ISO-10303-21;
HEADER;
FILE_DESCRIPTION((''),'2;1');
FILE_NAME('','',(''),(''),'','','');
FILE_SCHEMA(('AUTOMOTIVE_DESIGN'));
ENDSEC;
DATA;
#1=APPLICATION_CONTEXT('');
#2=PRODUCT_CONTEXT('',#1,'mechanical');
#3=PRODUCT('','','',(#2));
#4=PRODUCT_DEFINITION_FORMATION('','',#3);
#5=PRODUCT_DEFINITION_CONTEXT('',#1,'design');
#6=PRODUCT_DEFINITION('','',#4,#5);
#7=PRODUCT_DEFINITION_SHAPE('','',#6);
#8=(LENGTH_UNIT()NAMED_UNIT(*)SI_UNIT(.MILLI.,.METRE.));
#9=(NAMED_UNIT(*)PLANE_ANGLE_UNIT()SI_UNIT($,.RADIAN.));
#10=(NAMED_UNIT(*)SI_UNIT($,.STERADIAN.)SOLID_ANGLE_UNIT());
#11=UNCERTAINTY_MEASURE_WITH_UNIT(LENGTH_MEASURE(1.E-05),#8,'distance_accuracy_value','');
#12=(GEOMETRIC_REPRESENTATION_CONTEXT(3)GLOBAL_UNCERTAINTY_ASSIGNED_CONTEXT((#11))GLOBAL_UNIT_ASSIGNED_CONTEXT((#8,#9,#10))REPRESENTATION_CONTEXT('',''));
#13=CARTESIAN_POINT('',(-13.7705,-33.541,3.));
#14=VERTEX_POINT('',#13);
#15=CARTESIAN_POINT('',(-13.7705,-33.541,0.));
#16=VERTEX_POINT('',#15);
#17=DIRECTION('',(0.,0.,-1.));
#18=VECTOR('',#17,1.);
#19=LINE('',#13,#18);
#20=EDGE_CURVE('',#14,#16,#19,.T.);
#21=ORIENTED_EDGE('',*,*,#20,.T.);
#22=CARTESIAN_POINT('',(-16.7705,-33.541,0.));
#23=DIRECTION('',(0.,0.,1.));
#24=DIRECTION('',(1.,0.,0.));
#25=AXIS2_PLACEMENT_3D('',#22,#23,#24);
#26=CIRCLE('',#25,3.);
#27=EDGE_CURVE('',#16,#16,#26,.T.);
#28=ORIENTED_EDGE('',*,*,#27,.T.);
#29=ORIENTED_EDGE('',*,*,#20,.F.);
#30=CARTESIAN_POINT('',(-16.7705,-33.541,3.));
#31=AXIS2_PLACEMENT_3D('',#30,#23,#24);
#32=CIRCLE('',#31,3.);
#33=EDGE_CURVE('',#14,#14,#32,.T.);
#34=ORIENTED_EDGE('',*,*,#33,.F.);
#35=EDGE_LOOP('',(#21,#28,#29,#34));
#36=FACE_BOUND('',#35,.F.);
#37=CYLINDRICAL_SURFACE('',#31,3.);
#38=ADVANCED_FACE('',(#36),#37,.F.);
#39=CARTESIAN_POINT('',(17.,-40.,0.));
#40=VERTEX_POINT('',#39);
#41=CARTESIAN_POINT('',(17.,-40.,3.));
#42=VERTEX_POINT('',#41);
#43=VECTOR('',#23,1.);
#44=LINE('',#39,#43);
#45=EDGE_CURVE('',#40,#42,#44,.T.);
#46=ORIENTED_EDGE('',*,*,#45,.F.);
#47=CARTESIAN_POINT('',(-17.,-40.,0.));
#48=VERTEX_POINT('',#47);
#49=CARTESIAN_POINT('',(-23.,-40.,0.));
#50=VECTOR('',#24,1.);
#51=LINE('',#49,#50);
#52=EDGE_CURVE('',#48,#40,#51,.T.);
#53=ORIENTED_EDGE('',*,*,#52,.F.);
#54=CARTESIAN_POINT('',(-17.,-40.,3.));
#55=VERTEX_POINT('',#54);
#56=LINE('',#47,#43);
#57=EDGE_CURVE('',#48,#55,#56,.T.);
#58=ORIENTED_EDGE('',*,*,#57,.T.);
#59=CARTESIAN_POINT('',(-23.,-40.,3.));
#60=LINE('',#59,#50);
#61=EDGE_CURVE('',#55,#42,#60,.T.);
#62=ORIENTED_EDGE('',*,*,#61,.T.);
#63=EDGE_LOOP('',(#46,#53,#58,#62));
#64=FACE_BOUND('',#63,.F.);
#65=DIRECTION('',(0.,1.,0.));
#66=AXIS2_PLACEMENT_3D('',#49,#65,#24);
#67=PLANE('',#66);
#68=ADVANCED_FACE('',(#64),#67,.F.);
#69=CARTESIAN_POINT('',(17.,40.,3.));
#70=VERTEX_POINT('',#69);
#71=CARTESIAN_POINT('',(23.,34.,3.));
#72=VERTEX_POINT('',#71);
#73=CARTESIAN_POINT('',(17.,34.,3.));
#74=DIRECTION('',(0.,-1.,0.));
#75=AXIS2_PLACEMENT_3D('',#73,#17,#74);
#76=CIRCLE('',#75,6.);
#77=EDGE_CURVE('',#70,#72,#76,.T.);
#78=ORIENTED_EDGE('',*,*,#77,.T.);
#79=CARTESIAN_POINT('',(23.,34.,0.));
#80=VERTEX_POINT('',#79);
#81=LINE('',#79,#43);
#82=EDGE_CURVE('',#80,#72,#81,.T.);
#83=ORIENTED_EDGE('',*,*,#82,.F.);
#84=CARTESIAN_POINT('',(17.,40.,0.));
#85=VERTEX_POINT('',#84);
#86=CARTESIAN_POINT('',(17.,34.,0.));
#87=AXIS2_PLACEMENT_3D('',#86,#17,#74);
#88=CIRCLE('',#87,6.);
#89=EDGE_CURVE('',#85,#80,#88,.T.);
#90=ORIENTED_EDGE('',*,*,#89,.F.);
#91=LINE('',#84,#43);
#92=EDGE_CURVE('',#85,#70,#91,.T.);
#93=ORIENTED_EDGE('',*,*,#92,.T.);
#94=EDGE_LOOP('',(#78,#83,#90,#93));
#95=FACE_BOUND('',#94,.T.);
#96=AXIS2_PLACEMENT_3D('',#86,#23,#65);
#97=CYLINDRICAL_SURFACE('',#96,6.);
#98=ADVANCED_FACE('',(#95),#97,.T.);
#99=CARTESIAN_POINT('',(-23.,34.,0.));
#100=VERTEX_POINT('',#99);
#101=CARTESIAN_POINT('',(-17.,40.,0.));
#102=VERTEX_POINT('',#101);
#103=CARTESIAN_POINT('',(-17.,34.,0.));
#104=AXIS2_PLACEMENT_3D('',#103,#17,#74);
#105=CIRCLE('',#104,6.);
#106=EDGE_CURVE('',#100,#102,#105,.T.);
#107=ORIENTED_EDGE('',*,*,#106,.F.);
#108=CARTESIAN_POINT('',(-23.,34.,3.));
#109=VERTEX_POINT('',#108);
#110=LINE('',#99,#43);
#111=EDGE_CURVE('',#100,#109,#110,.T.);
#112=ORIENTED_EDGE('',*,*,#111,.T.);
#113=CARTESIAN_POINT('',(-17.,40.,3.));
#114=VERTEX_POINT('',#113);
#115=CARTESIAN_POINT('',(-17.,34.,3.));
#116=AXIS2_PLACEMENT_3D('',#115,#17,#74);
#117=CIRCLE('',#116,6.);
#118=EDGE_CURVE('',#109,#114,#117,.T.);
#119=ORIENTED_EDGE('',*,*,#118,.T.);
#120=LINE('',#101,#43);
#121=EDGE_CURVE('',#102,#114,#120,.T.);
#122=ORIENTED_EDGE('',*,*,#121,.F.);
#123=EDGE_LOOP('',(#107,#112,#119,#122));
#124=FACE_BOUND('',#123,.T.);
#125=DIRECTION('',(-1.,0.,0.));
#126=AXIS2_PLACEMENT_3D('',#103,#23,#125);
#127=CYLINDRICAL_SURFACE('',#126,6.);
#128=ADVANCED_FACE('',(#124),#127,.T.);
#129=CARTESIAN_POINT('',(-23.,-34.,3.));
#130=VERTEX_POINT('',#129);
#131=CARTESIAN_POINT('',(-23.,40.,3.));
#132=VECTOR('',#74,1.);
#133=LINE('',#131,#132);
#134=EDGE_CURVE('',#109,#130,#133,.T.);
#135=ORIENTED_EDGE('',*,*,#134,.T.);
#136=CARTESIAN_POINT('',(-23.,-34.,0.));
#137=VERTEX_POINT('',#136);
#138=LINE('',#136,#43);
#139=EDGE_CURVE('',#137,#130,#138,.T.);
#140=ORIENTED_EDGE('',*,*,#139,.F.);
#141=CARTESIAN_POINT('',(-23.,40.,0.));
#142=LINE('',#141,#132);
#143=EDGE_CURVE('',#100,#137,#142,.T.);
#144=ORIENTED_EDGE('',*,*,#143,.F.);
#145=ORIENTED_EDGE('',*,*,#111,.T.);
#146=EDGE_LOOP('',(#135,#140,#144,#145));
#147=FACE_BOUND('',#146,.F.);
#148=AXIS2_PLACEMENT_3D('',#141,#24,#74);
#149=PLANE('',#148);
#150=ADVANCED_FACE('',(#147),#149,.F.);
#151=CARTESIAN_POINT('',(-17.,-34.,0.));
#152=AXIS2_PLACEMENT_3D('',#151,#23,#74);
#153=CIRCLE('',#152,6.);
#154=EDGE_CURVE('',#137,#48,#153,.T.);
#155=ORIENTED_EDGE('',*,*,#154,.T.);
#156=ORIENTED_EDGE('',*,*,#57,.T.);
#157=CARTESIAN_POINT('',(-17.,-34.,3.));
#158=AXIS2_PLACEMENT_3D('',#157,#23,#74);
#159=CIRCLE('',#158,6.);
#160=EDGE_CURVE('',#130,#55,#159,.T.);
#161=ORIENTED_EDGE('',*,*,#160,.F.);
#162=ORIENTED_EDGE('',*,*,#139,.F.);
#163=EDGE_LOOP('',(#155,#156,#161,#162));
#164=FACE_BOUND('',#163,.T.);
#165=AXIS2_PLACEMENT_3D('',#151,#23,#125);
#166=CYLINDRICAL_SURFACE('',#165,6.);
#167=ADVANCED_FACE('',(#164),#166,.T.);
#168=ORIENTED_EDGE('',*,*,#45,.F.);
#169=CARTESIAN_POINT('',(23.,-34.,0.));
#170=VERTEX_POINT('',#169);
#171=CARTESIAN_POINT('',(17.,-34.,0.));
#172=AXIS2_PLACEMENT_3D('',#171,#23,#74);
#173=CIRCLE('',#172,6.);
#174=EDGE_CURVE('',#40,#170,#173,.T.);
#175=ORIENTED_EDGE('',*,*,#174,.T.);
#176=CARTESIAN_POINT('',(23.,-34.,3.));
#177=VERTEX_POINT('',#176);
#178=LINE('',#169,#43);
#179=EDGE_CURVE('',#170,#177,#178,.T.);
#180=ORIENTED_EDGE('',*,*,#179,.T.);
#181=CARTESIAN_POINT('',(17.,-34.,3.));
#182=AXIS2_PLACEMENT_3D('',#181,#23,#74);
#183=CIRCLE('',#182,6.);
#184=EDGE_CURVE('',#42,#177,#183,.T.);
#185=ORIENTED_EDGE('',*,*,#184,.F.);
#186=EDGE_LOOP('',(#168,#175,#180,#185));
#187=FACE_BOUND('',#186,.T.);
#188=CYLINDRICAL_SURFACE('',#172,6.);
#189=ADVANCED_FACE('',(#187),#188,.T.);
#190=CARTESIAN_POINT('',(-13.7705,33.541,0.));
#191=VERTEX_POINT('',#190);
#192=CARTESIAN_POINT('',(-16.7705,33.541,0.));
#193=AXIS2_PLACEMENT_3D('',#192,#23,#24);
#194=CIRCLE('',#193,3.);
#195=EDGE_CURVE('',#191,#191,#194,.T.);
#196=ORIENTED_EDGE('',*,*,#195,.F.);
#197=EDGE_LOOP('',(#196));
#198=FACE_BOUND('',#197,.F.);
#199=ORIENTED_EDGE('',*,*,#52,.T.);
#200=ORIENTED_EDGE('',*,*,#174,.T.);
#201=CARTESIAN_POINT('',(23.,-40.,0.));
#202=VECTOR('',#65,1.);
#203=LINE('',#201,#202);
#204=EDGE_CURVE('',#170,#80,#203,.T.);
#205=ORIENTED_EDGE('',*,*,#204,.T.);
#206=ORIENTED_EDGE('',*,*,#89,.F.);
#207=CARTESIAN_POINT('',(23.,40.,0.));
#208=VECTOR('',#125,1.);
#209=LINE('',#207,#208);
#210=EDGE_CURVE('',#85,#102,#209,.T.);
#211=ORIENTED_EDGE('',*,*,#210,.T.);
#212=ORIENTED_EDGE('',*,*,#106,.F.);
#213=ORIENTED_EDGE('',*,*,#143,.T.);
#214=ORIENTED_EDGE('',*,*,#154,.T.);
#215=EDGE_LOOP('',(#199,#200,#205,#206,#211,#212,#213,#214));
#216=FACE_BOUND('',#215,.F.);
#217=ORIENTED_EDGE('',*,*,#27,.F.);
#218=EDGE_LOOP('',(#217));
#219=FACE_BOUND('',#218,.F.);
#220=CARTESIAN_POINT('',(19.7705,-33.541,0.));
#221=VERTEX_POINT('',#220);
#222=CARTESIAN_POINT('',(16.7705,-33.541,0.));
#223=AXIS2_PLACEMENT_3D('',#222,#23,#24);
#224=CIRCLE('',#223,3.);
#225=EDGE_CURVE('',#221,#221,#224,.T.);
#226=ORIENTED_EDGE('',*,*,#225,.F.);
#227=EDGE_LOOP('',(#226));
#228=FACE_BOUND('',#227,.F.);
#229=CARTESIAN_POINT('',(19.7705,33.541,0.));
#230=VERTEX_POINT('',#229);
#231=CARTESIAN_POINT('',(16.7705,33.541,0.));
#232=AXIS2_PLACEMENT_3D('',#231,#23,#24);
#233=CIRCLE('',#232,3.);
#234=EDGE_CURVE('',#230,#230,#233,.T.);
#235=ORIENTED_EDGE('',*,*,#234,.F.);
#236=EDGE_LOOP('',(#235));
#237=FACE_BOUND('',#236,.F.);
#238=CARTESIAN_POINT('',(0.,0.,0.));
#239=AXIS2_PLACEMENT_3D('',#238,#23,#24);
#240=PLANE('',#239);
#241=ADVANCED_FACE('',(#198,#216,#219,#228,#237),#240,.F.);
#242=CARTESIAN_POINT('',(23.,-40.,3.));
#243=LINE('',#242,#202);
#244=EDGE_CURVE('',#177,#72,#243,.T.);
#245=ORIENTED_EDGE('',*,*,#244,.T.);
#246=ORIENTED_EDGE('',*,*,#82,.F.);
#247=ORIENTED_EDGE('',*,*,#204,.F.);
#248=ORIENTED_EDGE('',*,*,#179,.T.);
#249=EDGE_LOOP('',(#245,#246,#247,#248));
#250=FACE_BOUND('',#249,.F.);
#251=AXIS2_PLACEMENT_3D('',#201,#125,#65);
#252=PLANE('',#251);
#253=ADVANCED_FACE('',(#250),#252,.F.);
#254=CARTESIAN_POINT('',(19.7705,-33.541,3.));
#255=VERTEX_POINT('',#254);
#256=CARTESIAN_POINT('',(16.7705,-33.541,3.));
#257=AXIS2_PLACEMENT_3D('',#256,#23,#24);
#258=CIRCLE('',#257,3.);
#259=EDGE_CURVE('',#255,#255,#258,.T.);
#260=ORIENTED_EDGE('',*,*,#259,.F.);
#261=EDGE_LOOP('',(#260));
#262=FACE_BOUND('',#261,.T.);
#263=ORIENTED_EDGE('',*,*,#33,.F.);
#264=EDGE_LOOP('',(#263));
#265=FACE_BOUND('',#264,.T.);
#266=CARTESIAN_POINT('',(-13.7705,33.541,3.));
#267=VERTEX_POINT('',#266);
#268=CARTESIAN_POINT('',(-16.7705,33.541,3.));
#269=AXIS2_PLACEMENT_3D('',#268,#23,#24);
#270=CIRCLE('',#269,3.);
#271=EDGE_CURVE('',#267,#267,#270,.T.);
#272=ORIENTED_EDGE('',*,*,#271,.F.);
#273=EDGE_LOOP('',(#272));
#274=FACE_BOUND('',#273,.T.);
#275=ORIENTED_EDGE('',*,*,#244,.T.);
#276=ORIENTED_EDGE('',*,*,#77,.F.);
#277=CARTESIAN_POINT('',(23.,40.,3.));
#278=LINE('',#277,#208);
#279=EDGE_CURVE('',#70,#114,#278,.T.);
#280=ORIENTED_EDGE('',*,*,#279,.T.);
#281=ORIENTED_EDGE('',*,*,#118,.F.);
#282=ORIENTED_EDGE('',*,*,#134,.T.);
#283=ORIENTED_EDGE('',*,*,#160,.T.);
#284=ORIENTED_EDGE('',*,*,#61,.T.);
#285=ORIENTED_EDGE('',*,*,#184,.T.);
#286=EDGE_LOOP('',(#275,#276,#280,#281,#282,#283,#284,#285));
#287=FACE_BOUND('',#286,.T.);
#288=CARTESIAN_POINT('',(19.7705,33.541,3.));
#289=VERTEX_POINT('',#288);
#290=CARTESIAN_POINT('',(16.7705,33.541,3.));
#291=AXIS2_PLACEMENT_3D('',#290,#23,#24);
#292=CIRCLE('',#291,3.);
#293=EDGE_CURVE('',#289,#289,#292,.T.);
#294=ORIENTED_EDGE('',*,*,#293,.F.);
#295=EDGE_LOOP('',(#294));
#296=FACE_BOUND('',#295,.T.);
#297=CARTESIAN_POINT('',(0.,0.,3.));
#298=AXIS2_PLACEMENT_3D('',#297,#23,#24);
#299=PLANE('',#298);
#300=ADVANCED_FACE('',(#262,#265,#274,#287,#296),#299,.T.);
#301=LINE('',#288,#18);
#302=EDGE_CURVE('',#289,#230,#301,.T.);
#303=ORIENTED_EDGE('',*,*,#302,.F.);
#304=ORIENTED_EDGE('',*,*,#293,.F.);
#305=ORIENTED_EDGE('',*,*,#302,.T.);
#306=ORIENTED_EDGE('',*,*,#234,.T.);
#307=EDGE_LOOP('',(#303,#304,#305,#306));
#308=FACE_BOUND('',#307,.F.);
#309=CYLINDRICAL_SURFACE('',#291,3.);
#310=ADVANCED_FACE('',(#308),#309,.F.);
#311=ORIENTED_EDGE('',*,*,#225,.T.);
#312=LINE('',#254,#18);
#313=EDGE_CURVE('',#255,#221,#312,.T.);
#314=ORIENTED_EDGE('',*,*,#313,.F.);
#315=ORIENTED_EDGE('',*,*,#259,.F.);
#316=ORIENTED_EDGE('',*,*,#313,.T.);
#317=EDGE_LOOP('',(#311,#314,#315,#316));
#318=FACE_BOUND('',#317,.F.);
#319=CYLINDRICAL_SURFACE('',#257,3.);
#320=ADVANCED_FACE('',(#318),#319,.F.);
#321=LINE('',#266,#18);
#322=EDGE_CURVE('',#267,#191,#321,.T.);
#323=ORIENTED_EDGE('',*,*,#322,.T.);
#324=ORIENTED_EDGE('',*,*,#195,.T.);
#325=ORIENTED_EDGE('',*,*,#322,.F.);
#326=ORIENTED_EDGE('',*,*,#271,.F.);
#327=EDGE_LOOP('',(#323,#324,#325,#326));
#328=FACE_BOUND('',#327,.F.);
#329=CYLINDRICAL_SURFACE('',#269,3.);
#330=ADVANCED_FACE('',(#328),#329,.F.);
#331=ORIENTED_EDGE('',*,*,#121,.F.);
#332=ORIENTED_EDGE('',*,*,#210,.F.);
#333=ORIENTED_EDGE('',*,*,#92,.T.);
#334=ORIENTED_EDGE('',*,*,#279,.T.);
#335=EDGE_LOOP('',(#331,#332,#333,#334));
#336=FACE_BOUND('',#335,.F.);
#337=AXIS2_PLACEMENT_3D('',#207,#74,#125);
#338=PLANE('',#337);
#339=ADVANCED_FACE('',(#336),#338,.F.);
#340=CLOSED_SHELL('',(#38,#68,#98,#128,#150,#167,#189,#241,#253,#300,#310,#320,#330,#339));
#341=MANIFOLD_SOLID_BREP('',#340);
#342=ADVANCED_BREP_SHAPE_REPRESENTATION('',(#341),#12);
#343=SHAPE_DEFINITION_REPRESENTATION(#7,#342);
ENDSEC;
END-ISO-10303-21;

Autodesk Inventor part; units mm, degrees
ref_plane "YZ Plane" through (0, 0, 0) normal (1, 0, 0) x (0, 1, 0)
ref_plane "XZ Plane" through (0, 0, 0) normal (0, 1, 0) x (-1, 0, 0)
ref_plane "XY Plane" through (0, 0, 0) normal (0, 0, 1) x (1, 0, 0)
sketch "Sketch1" plane through (0, 0, 0) normal (0, 0, 1) x (1, 0, 0)
  line L0 (-23, -40) -> (23, -40)
  line L1 (23, -40) -> (23, 40)
  line L2 (23, 40) -> (-23, 40)
  line L3 (-23, 40) -> (-23, -40)
  line L4 (-23, -40) -> (23, 40) construction
  line L5 (23, -40) -> (-23, 40) construction
  line L6 (10, -20) -> (-10, -20)
  line L7 (-10, -20) -> (-10, 20)
  line L8 (-10, 20) -> (10, 20)
  line L9 (10, 20) -> (10, -20)
  line L10 (10, -20) -> (-10, 20) construction
  line L11 (-10, -20) -> (10, 20) construction
  point P0 (0, 0)
  dimension "d154" = 46
  dimension "d155" = 80
  dimension "d172" = 20
  dimension "d181" = 40
extrude "Plate5" add sketch "Sketch1" along normal blind 3 contours L3 L2 L1 L0 | L6 L7 L8 L9
sketch "Sketch9" plane through (0, 0, 3) normal (0, 0, 1) x (1, 0, 0)
  circle A0 centre (16.7705, -33.541) radius 3
  line L0 (16.7705, 33.541) -> (-16.7705, 33.541) construction
  line L1 (-16.7705, 33.541) -> (-16.7705, -33.541) construction
  line L2 (-16.7705, -33.541) -> (16.7705, -33.541) construction
  line L3 (16.7705, -33.541) -> (16.7705, 33.541) construction
  line L4 (16.7705, 33.541) -> (-16.7705, -33.541) construction
  line L5 (-16.7705, 33.541) -> (16.7705, -33.541) construction
  circle A1 centre (-16.7705, -33.541) radius 3
  circle A2 centre (16.7705, 33.541) radius 3
  circle A3 centre (-16.7705, 33.541) radius 3
  circle A4 centre (0, 0) radius 37.5 construction
  line L6 (23, -40) -> (-23, -40) construction
  line L7 (23, 40) -> (23, -40) construction
  line L8 (-23, 40) -> (23, 40) construction
  line L9 (-23, -40) -> (-23, 40) construction
  circle A5 centre (0, 0) radius 22.3607 construction
  line L10 (10, 20) -> (-10, -20) construction
  dimension "d180" = 75
  dimension "d182" = 15.1393
  dimension "d174" = 6
  dimension "d183" = 33.541
extrude "Cut2" cut sketch "Sketch9" against normal blind 3
fillet "Corner Round1" radius 6 4 edges at (23, 40, 1.5) (-23, 40, 1.5) (-23, -40, 1.5) (23, -40, 1.5)
feature "Corner Round2" [suppressed]
properties part number "ANP 1434 BOTTOM FDS support flange" material "Stainless Steel"
